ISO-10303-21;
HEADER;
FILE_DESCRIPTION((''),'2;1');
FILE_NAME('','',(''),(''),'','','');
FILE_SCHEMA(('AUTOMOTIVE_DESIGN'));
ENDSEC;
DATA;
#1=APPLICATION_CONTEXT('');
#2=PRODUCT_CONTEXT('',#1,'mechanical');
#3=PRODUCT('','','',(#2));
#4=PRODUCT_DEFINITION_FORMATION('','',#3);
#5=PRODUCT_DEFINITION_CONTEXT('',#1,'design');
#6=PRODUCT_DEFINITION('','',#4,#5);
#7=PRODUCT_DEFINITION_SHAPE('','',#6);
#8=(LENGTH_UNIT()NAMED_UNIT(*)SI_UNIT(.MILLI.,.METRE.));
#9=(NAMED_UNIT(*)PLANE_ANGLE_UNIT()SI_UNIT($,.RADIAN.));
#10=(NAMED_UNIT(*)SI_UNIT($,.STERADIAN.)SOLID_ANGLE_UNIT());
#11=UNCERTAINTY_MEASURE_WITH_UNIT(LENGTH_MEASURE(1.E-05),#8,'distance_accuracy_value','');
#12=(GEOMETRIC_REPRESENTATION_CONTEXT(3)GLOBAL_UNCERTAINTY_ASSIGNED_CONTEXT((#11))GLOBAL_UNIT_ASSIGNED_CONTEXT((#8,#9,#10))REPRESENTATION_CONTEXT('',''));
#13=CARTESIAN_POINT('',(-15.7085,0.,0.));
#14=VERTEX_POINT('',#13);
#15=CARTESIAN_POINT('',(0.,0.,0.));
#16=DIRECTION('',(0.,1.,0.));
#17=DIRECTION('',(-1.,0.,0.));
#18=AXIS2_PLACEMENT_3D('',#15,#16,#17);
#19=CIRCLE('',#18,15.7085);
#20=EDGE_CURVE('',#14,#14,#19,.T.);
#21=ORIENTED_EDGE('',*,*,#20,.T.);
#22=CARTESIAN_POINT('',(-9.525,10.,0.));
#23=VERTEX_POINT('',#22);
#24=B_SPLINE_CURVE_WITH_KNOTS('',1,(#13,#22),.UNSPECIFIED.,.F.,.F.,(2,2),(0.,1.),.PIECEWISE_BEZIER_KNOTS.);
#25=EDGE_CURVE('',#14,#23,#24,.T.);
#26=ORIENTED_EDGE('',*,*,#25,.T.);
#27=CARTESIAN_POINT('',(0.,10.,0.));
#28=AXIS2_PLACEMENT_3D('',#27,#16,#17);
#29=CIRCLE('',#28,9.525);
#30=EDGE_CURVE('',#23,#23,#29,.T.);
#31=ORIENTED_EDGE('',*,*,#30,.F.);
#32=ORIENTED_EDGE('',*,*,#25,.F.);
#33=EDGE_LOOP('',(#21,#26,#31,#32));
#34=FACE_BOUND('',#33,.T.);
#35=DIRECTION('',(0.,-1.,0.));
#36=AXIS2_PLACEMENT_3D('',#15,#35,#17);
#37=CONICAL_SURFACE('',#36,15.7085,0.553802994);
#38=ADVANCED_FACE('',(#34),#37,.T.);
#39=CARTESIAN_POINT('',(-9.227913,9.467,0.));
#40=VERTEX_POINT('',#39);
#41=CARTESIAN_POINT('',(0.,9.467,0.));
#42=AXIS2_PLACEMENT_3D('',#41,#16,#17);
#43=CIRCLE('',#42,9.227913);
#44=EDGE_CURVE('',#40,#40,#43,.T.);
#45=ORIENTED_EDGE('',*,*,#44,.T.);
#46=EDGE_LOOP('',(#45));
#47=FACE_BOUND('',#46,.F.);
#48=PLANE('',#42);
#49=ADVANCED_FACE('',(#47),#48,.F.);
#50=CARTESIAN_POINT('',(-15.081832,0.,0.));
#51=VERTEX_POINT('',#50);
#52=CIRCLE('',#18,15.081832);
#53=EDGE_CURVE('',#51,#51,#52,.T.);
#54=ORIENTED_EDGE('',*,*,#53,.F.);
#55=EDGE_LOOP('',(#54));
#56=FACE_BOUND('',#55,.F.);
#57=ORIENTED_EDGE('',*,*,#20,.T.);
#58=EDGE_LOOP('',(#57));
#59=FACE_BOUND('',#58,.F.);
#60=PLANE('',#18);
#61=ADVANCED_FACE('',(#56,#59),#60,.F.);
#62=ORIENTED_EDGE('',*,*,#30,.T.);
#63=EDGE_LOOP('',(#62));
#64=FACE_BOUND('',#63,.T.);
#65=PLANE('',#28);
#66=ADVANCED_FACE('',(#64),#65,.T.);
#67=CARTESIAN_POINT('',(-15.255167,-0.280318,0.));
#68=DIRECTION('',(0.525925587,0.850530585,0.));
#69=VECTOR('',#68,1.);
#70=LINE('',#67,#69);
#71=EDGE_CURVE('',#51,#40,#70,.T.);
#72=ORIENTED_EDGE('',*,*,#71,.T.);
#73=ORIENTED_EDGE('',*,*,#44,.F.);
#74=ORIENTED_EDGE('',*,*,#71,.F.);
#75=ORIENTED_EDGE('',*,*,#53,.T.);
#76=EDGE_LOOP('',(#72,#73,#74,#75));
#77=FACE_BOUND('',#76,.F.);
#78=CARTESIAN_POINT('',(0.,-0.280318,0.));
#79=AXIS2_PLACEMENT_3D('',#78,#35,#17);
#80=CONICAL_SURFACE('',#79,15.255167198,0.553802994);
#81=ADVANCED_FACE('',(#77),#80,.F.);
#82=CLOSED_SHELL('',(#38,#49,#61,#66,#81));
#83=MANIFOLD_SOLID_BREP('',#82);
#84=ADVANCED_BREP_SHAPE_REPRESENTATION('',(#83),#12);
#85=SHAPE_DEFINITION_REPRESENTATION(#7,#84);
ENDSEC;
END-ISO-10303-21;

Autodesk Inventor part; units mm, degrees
ref_plane "YZ Plane" through (0, 0, 0) normal (1, 0, 0) x (0, 1, 0)
ref_plane "XY Plane" through (0, 0, 0) normal (0, 0, 1) x (1, 0, 0)
sketch "Sketch1" plane through (0, 0, 0) normal (0, 1, 0) x (-1, 0, 0)
  circle A0 centre (0, 0) radius 15.7085
  dimension "d0" = 31.417
ref_plane "Work Plane1" through (0, 10, 0) normal (0, 1, 0) x (-1, 0, 0)
sketch "Sketch5" plane through (0, 10, 0) normal (0, 1, 0) x (-1, 0, 0)
  point P0 (0, 0)
  point P1 (0, 0)
sketch "Sketch8" plane through (0, 10, 0) normal (0, 1, 0) x (-1, 0, 0)
  circle A0 centre (0, 0) radius 9.525
  dimension "d31" = 19.05
loft "Loft6" add profiles "Sketch1", "Sketch8"
shell "Shell4" thickness 0.533 removed faces 1 at (2.3044, 0, 8.5824)
properties part number "DPLX_P010_Wire_Mesh_reducer_Spark_Gap"
